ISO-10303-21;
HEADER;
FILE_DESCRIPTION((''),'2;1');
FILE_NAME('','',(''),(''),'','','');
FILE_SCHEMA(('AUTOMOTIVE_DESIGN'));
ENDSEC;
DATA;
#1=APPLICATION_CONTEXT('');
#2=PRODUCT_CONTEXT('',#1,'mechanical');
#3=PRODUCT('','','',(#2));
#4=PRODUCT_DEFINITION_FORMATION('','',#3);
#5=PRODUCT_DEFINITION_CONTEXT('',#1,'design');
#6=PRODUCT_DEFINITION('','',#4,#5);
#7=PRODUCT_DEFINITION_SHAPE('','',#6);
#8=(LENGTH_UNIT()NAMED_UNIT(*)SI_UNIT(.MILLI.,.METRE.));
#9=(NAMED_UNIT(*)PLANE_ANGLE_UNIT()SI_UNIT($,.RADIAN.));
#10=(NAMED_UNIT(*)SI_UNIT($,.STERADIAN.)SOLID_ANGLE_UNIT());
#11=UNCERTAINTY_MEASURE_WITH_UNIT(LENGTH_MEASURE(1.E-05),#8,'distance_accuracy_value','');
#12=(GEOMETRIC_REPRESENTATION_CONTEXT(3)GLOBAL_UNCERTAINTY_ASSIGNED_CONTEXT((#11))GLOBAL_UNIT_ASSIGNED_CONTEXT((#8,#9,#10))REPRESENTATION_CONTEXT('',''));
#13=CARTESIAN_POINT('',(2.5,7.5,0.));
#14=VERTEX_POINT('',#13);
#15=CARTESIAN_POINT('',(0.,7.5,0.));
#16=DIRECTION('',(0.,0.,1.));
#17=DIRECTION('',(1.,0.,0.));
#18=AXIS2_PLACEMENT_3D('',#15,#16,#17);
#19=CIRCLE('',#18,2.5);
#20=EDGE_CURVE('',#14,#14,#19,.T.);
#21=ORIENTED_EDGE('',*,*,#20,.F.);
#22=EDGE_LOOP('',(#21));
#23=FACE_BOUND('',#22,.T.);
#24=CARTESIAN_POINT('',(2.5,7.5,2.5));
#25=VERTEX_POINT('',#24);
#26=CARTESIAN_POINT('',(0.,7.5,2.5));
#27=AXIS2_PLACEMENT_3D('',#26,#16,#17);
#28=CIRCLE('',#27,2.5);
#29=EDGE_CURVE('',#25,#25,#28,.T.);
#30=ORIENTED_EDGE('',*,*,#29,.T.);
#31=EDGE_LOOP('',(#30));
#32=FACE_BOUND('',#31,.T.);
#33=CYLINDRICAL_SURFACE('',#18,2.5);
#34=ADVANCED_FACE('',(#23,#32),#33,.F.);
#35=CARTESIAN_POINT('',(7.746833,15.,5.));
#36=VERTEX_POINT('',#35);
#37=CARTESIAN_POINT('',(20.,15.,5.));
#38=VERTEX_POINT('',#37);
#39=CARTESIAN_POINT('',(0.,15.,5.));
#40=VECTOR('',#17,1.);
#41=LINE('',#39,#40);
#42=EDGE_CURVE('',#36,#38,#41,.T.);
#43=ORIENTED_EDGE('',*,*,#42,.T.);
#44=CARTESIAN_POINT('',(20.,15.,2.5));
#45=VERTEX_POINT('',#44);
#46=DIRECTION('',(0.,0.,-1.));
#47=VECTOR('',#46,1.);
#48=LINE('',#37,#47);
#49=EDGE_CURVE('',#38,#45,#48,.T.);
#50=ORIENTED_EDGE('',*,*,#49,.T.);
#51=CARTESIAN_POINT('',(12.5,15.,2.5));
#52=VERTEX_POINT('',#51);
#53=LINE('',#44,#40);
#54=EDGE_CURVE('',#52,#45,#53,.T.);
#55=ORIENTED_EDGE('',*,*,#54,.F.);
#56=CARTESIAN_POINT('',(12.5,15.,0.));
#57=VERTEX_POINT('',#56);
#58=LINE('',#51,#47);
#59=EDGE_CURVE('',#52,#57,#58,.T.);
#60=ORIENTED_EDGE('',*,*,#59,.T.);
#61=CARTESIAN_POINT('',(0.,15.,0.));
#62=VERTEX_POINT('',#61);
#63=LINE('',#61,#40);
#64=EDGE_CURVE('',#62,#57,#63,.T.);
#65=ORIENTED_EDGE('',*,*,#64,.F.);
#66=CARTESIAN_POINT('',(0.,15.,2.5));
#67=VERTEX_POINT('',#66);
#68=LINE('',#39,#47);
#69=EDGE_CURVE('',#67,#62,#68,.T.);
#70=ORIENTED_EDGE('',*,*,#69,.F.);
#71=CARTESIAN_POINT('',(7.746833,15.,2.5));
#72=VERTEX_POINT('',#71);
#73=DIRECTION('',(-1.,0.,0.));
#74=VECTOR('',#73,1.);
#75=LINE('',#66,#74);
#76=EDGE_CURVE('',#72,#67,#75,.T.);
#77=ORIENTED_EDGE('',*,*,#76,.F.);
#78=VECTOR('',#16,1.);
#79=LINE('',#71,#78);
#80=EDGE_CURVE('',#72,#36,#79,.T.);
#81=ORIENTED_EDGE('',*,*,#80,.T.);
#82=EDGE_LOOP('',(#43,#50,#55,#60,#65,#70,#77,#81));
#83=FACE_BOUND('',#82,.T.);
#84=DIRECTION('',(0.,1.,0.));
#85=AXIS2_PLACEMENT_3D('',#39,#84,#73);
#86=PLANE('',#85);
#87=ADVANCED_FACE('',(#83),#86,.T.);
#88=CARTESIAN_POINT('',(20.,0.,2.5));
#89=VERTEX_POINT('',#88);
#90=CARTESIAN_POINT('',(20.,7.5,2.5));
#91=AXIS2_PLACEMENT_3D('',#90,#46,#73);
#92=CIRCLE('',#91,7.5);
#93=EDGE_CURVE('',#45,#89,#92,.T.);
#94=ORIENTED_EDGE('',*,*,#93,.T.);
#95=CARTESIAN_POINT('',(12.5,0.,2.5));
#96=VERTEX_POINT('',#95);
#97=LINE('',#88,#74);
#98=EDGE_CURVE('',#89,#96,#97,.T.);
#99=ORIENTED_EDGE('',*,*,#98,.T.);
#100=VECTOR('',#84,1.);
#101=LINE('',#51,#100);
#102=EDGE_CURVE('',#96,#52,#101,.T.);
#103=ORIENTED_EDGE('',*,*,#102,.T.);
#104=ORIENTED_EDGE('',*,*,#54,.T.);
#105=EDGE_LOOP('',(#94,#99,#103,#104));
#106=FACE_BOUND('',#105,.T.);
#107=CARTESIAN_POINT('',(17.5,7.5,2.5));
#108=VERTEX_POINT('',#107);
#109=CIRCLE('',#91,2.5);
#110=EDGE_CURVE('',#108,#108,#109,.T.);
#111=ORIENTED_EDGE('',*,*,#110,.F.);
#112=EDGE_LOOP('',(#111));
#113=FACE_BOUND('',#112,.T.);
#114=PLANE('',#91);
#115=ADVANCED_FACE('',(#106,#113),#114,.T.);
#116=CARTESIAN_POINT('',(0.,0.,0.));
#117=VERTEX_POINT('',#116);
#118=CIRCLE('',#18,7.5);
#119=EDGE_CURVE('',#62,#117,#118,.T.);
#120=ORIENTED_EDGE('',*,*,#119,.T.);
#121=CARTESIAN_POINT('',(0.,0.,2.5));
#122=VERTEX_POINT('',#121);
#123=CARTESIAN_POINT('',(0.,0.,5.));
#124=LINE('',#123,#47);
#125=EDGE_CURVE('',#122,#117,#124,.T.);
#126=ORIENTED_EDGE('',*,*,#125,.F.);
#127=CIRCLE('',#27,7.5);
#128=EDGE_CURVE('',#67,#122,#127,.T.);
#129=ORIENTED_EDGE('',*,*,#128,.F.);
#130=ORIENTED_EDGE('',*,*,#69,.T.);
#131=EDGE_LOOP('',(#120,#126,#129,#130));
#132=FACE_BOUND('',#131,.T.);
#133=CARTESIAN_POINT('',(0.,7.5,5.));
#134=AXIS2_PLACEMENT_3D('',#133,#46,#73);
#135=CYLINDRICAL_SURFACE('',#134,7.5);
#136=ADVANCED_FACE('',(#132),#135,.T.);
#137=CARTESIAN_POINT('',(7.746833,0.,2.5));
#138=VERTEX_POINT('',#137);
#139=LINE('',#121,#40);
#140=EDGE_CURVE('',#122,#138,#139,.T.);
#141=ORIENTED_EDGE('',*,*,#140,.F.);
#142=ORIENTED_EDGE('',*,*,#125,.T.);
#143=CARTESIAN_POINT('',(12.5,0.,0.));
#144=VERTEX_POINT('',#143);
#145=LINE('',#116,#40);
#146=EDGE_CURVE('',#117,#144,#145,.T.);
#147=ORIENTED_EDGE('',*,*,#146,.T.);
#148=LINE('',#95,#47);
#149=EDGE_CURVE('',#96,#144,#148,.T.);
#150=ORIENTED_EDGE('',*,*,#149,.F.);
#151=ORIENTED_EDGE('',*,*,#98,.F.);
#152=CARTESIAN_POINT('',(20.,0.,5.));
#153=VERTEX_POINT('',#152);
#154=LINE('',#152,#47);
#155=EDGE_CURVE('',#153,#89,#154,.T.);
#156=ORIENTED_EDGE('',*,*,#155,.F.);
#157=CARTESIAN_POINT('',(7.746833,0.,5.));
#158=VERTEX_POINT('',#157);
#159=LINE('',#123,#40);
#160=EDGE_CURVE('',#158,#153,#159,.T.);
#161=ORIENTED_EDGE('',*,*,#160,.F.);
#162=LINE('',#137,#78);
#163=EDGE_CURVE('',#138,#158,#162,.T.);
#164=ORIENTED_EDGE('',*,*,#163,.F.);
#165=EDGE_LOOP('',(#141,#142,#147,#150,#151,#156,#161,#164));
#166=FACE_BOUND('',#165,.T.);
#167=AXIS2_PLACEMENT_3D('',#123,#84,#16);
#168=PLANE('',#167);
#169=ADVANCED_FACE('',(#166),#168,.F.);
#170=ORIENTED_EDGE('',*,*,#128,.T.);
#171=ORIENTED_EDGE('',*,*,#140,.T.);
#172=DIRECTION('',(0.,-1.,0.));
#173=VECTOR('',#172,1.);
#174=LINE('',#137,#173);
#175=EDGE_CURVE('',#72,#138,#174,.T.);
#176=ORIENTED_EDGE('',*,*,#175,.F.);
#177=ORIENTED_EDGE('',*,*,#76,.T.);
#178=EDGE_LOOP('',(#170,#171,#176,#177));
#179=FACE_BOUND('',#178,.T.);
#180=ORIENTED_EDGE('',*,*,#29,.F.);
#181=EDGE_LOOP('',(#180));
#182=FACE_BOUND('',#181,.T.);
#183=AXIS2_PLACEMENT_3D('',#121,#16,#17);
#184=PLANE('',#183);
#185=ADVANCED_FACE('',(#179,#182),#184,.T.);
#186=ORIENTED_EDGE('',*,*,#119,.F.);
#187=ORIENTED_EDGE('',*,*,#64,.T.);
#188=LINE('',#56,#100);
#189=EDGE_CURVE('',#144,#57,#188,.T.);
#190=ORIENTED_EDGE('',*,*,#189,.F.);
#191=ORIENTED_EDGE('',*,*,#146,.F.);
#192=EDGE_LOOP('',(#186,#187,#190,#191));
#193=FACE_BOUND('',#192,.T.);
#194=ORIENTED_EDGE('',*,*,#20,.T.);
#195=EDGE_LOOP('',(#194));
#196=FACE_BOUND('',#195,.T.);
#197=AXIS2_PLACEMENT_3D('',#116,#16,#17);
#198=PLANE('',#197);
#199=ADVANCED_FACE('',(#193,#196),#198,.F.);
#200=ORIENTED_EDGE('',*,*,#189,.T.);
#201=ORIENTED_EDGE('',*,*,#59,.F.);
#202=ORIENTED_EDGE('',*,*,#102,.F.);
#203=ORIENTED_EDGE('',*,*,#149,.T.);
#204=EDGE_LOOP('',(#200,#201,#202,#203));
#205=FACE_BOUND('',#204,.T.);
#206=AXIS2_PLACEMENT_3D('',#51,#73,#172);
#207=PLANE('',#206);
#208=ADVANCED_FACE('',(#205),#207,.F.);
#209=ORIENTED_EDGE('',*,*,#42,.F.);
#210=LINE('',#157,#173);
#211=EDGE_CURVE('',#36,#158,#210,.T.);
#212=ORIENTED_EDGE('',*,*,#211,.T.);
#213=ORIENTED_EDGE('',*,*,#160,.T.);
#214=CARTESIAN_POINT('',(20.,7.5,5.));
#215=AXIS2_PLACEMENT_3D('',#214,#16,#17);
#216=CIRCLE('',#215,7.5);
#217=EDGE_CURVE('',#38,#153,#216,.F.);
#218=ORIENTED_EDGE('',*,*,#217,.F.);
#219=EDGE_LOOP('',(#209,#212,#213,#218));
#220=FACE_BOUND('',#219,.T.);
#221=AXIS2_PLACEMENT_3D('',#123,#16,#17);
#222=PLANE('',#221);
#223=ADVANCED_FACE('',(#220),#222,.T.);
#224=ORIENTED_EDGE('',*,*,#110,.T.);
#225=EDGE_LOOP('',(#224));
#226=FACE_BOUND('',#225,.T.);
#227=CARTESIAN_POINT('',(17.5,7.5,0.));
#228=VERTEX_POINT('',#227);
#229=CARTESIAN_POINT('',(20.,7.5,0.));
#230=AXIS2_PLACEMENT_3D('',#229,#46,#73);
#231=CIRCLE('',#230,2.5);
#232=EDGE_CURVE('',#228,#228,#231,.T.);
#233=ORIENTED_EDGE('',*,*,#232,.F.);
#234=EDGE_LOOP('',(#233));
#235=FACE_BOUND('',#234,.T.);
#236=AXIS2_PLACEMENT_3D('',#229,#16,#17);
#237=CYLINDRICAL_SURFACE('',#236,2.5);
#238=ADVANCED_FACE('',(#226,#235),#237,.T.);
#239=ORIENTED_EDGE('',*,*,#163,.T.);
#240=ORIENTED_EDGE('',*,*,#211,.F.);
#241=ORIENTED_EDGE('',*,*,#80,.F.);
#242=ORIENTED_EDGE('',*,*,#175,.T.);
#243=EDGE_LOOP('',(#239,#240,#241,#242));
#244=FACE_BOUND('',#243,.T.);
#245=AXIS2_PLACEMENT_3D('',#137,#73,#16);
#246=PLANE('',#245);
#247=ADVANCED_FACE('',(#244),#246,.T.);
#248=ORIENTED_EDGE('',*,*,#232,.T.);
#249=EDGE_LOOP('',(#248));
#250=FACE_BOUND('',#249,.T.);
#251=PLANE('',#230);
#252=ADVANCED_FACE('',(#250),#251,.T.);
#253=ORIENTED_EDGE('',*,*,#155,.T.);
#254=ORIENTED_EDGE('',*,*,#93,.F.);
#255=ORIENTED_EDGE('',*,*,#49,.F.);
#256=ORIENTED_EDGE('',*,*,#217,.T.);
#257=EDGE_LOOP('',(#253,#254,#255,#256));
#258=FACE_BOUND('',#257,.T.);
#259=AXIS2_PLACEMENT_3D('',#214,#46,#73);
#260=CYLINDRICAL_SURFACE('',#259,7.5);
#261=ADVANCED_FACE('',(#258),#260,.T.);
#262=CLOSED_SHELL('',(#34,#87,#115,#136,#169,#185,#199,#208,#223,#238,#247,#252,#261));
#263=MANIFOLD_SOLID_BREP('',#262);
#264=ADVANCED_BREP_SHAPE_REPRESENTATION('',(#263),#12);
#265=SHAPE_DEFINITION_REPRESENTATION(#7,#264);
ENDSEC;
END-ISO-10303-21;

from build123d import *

# Parameters (mm, degrees)
BOSS_EXTRUDE1_DEPTH = 5
CUT_EXTRUDE2_DEPTH  = 2.5
CUT_EXTRUDE6_START  = -2.5
CUT_EXTRUDE6_DEPTH  = 2.5
SKETCH11_R          = 2.5
CUT_EXTRUDE7_DEPTH  = 2.5
SKETCH12_R          = 2.5
BOSS_EXTRUDE3_DEPTH = 2.5


with BuildPart() as part:
    # Sketch1 → Boss-Extrude1 (new body)
    with BuildSketch(Plane.XY):
        with BuildLine():
            ThreePointArc((-3.422374857, 0.826369029), (-1.760364695, 0.209518799), (0, 0))
            Line((0, 0), (20, 0))
            ThreePointArc((20, 0), (27.5, 7.5), (20, 15))
            Line((20, 15), (0, 15))
            ThreePointArc((0, 15), (-7.290481201, 9.260364695), (-3.422374857, 0.826369029))
        make_face()
    extrude(amount=BOSS_EXTRUDE1_DEPTH)

    # Sketch6 → Cut-Extrude2 (cut)
    with BuildSketch(Plane(origin=(0, 0, 0), x_dir=(-1, 0, 0), z_dir=(0, 0, -1))):
        with BuildLine():
            Line((-20, 15), (-12.5, 15))
            Line((-12.5, 15), (-12.5, 0))
            Line((-12.5, 0), (-20, 0))
            ThreePointArc((-20, 0), (-27.5, 7.5), (-20, 15))
        make_face()
    extrude(amount=-CUT_EXTRUDE2_DEPTH, mode=Mode.SUBTRACT)

    # Sketch7 → Cut-Extrude6 (cut)
    with BuildSketch(Plane.XY.offset(5).offset(CUT_EXTRUDE6_START)):
        with BuildLine():
            Line((7.746832871, 15), (0, 15))
            ThreePointArc((0, 15), (-7.5, 7.5), (0, 0))
            Line((0, 0), (5, 0))
            Line((5, 0), (7.746832871, 0))
            Line((7.746832871, 0), (7.746832871, 15))
        make_face()
    extrude(amount=CUT_EXTRUDE6_DEPTH, mode=Mode.SUBTRACT)

    # Sketch11 → Cut-Extrude7 (cut)
    with BuildSketch(Plane.XY.offset(2.5)):
        with Locations((0, 7.5)):
            Circle(SKETCH11_R)
    extrude(amount=-CUT_EXTRUDE7_DEPTH, mode=Mode.SUBTRACT)

    # Sketch12 → Boss-Extrude3 (add)
    with BuildSketch(Plane(origin=(0, 0, 2.5), x_dir=(-1, 0, 0), z_dir=(0, 0, -1))):
        with Locations((-20, 7.5)):
            Circle(SKETCH12_R)
    extrude(amount=BOSS_EXTRUDE3_DEPTH)


solid = part.part
